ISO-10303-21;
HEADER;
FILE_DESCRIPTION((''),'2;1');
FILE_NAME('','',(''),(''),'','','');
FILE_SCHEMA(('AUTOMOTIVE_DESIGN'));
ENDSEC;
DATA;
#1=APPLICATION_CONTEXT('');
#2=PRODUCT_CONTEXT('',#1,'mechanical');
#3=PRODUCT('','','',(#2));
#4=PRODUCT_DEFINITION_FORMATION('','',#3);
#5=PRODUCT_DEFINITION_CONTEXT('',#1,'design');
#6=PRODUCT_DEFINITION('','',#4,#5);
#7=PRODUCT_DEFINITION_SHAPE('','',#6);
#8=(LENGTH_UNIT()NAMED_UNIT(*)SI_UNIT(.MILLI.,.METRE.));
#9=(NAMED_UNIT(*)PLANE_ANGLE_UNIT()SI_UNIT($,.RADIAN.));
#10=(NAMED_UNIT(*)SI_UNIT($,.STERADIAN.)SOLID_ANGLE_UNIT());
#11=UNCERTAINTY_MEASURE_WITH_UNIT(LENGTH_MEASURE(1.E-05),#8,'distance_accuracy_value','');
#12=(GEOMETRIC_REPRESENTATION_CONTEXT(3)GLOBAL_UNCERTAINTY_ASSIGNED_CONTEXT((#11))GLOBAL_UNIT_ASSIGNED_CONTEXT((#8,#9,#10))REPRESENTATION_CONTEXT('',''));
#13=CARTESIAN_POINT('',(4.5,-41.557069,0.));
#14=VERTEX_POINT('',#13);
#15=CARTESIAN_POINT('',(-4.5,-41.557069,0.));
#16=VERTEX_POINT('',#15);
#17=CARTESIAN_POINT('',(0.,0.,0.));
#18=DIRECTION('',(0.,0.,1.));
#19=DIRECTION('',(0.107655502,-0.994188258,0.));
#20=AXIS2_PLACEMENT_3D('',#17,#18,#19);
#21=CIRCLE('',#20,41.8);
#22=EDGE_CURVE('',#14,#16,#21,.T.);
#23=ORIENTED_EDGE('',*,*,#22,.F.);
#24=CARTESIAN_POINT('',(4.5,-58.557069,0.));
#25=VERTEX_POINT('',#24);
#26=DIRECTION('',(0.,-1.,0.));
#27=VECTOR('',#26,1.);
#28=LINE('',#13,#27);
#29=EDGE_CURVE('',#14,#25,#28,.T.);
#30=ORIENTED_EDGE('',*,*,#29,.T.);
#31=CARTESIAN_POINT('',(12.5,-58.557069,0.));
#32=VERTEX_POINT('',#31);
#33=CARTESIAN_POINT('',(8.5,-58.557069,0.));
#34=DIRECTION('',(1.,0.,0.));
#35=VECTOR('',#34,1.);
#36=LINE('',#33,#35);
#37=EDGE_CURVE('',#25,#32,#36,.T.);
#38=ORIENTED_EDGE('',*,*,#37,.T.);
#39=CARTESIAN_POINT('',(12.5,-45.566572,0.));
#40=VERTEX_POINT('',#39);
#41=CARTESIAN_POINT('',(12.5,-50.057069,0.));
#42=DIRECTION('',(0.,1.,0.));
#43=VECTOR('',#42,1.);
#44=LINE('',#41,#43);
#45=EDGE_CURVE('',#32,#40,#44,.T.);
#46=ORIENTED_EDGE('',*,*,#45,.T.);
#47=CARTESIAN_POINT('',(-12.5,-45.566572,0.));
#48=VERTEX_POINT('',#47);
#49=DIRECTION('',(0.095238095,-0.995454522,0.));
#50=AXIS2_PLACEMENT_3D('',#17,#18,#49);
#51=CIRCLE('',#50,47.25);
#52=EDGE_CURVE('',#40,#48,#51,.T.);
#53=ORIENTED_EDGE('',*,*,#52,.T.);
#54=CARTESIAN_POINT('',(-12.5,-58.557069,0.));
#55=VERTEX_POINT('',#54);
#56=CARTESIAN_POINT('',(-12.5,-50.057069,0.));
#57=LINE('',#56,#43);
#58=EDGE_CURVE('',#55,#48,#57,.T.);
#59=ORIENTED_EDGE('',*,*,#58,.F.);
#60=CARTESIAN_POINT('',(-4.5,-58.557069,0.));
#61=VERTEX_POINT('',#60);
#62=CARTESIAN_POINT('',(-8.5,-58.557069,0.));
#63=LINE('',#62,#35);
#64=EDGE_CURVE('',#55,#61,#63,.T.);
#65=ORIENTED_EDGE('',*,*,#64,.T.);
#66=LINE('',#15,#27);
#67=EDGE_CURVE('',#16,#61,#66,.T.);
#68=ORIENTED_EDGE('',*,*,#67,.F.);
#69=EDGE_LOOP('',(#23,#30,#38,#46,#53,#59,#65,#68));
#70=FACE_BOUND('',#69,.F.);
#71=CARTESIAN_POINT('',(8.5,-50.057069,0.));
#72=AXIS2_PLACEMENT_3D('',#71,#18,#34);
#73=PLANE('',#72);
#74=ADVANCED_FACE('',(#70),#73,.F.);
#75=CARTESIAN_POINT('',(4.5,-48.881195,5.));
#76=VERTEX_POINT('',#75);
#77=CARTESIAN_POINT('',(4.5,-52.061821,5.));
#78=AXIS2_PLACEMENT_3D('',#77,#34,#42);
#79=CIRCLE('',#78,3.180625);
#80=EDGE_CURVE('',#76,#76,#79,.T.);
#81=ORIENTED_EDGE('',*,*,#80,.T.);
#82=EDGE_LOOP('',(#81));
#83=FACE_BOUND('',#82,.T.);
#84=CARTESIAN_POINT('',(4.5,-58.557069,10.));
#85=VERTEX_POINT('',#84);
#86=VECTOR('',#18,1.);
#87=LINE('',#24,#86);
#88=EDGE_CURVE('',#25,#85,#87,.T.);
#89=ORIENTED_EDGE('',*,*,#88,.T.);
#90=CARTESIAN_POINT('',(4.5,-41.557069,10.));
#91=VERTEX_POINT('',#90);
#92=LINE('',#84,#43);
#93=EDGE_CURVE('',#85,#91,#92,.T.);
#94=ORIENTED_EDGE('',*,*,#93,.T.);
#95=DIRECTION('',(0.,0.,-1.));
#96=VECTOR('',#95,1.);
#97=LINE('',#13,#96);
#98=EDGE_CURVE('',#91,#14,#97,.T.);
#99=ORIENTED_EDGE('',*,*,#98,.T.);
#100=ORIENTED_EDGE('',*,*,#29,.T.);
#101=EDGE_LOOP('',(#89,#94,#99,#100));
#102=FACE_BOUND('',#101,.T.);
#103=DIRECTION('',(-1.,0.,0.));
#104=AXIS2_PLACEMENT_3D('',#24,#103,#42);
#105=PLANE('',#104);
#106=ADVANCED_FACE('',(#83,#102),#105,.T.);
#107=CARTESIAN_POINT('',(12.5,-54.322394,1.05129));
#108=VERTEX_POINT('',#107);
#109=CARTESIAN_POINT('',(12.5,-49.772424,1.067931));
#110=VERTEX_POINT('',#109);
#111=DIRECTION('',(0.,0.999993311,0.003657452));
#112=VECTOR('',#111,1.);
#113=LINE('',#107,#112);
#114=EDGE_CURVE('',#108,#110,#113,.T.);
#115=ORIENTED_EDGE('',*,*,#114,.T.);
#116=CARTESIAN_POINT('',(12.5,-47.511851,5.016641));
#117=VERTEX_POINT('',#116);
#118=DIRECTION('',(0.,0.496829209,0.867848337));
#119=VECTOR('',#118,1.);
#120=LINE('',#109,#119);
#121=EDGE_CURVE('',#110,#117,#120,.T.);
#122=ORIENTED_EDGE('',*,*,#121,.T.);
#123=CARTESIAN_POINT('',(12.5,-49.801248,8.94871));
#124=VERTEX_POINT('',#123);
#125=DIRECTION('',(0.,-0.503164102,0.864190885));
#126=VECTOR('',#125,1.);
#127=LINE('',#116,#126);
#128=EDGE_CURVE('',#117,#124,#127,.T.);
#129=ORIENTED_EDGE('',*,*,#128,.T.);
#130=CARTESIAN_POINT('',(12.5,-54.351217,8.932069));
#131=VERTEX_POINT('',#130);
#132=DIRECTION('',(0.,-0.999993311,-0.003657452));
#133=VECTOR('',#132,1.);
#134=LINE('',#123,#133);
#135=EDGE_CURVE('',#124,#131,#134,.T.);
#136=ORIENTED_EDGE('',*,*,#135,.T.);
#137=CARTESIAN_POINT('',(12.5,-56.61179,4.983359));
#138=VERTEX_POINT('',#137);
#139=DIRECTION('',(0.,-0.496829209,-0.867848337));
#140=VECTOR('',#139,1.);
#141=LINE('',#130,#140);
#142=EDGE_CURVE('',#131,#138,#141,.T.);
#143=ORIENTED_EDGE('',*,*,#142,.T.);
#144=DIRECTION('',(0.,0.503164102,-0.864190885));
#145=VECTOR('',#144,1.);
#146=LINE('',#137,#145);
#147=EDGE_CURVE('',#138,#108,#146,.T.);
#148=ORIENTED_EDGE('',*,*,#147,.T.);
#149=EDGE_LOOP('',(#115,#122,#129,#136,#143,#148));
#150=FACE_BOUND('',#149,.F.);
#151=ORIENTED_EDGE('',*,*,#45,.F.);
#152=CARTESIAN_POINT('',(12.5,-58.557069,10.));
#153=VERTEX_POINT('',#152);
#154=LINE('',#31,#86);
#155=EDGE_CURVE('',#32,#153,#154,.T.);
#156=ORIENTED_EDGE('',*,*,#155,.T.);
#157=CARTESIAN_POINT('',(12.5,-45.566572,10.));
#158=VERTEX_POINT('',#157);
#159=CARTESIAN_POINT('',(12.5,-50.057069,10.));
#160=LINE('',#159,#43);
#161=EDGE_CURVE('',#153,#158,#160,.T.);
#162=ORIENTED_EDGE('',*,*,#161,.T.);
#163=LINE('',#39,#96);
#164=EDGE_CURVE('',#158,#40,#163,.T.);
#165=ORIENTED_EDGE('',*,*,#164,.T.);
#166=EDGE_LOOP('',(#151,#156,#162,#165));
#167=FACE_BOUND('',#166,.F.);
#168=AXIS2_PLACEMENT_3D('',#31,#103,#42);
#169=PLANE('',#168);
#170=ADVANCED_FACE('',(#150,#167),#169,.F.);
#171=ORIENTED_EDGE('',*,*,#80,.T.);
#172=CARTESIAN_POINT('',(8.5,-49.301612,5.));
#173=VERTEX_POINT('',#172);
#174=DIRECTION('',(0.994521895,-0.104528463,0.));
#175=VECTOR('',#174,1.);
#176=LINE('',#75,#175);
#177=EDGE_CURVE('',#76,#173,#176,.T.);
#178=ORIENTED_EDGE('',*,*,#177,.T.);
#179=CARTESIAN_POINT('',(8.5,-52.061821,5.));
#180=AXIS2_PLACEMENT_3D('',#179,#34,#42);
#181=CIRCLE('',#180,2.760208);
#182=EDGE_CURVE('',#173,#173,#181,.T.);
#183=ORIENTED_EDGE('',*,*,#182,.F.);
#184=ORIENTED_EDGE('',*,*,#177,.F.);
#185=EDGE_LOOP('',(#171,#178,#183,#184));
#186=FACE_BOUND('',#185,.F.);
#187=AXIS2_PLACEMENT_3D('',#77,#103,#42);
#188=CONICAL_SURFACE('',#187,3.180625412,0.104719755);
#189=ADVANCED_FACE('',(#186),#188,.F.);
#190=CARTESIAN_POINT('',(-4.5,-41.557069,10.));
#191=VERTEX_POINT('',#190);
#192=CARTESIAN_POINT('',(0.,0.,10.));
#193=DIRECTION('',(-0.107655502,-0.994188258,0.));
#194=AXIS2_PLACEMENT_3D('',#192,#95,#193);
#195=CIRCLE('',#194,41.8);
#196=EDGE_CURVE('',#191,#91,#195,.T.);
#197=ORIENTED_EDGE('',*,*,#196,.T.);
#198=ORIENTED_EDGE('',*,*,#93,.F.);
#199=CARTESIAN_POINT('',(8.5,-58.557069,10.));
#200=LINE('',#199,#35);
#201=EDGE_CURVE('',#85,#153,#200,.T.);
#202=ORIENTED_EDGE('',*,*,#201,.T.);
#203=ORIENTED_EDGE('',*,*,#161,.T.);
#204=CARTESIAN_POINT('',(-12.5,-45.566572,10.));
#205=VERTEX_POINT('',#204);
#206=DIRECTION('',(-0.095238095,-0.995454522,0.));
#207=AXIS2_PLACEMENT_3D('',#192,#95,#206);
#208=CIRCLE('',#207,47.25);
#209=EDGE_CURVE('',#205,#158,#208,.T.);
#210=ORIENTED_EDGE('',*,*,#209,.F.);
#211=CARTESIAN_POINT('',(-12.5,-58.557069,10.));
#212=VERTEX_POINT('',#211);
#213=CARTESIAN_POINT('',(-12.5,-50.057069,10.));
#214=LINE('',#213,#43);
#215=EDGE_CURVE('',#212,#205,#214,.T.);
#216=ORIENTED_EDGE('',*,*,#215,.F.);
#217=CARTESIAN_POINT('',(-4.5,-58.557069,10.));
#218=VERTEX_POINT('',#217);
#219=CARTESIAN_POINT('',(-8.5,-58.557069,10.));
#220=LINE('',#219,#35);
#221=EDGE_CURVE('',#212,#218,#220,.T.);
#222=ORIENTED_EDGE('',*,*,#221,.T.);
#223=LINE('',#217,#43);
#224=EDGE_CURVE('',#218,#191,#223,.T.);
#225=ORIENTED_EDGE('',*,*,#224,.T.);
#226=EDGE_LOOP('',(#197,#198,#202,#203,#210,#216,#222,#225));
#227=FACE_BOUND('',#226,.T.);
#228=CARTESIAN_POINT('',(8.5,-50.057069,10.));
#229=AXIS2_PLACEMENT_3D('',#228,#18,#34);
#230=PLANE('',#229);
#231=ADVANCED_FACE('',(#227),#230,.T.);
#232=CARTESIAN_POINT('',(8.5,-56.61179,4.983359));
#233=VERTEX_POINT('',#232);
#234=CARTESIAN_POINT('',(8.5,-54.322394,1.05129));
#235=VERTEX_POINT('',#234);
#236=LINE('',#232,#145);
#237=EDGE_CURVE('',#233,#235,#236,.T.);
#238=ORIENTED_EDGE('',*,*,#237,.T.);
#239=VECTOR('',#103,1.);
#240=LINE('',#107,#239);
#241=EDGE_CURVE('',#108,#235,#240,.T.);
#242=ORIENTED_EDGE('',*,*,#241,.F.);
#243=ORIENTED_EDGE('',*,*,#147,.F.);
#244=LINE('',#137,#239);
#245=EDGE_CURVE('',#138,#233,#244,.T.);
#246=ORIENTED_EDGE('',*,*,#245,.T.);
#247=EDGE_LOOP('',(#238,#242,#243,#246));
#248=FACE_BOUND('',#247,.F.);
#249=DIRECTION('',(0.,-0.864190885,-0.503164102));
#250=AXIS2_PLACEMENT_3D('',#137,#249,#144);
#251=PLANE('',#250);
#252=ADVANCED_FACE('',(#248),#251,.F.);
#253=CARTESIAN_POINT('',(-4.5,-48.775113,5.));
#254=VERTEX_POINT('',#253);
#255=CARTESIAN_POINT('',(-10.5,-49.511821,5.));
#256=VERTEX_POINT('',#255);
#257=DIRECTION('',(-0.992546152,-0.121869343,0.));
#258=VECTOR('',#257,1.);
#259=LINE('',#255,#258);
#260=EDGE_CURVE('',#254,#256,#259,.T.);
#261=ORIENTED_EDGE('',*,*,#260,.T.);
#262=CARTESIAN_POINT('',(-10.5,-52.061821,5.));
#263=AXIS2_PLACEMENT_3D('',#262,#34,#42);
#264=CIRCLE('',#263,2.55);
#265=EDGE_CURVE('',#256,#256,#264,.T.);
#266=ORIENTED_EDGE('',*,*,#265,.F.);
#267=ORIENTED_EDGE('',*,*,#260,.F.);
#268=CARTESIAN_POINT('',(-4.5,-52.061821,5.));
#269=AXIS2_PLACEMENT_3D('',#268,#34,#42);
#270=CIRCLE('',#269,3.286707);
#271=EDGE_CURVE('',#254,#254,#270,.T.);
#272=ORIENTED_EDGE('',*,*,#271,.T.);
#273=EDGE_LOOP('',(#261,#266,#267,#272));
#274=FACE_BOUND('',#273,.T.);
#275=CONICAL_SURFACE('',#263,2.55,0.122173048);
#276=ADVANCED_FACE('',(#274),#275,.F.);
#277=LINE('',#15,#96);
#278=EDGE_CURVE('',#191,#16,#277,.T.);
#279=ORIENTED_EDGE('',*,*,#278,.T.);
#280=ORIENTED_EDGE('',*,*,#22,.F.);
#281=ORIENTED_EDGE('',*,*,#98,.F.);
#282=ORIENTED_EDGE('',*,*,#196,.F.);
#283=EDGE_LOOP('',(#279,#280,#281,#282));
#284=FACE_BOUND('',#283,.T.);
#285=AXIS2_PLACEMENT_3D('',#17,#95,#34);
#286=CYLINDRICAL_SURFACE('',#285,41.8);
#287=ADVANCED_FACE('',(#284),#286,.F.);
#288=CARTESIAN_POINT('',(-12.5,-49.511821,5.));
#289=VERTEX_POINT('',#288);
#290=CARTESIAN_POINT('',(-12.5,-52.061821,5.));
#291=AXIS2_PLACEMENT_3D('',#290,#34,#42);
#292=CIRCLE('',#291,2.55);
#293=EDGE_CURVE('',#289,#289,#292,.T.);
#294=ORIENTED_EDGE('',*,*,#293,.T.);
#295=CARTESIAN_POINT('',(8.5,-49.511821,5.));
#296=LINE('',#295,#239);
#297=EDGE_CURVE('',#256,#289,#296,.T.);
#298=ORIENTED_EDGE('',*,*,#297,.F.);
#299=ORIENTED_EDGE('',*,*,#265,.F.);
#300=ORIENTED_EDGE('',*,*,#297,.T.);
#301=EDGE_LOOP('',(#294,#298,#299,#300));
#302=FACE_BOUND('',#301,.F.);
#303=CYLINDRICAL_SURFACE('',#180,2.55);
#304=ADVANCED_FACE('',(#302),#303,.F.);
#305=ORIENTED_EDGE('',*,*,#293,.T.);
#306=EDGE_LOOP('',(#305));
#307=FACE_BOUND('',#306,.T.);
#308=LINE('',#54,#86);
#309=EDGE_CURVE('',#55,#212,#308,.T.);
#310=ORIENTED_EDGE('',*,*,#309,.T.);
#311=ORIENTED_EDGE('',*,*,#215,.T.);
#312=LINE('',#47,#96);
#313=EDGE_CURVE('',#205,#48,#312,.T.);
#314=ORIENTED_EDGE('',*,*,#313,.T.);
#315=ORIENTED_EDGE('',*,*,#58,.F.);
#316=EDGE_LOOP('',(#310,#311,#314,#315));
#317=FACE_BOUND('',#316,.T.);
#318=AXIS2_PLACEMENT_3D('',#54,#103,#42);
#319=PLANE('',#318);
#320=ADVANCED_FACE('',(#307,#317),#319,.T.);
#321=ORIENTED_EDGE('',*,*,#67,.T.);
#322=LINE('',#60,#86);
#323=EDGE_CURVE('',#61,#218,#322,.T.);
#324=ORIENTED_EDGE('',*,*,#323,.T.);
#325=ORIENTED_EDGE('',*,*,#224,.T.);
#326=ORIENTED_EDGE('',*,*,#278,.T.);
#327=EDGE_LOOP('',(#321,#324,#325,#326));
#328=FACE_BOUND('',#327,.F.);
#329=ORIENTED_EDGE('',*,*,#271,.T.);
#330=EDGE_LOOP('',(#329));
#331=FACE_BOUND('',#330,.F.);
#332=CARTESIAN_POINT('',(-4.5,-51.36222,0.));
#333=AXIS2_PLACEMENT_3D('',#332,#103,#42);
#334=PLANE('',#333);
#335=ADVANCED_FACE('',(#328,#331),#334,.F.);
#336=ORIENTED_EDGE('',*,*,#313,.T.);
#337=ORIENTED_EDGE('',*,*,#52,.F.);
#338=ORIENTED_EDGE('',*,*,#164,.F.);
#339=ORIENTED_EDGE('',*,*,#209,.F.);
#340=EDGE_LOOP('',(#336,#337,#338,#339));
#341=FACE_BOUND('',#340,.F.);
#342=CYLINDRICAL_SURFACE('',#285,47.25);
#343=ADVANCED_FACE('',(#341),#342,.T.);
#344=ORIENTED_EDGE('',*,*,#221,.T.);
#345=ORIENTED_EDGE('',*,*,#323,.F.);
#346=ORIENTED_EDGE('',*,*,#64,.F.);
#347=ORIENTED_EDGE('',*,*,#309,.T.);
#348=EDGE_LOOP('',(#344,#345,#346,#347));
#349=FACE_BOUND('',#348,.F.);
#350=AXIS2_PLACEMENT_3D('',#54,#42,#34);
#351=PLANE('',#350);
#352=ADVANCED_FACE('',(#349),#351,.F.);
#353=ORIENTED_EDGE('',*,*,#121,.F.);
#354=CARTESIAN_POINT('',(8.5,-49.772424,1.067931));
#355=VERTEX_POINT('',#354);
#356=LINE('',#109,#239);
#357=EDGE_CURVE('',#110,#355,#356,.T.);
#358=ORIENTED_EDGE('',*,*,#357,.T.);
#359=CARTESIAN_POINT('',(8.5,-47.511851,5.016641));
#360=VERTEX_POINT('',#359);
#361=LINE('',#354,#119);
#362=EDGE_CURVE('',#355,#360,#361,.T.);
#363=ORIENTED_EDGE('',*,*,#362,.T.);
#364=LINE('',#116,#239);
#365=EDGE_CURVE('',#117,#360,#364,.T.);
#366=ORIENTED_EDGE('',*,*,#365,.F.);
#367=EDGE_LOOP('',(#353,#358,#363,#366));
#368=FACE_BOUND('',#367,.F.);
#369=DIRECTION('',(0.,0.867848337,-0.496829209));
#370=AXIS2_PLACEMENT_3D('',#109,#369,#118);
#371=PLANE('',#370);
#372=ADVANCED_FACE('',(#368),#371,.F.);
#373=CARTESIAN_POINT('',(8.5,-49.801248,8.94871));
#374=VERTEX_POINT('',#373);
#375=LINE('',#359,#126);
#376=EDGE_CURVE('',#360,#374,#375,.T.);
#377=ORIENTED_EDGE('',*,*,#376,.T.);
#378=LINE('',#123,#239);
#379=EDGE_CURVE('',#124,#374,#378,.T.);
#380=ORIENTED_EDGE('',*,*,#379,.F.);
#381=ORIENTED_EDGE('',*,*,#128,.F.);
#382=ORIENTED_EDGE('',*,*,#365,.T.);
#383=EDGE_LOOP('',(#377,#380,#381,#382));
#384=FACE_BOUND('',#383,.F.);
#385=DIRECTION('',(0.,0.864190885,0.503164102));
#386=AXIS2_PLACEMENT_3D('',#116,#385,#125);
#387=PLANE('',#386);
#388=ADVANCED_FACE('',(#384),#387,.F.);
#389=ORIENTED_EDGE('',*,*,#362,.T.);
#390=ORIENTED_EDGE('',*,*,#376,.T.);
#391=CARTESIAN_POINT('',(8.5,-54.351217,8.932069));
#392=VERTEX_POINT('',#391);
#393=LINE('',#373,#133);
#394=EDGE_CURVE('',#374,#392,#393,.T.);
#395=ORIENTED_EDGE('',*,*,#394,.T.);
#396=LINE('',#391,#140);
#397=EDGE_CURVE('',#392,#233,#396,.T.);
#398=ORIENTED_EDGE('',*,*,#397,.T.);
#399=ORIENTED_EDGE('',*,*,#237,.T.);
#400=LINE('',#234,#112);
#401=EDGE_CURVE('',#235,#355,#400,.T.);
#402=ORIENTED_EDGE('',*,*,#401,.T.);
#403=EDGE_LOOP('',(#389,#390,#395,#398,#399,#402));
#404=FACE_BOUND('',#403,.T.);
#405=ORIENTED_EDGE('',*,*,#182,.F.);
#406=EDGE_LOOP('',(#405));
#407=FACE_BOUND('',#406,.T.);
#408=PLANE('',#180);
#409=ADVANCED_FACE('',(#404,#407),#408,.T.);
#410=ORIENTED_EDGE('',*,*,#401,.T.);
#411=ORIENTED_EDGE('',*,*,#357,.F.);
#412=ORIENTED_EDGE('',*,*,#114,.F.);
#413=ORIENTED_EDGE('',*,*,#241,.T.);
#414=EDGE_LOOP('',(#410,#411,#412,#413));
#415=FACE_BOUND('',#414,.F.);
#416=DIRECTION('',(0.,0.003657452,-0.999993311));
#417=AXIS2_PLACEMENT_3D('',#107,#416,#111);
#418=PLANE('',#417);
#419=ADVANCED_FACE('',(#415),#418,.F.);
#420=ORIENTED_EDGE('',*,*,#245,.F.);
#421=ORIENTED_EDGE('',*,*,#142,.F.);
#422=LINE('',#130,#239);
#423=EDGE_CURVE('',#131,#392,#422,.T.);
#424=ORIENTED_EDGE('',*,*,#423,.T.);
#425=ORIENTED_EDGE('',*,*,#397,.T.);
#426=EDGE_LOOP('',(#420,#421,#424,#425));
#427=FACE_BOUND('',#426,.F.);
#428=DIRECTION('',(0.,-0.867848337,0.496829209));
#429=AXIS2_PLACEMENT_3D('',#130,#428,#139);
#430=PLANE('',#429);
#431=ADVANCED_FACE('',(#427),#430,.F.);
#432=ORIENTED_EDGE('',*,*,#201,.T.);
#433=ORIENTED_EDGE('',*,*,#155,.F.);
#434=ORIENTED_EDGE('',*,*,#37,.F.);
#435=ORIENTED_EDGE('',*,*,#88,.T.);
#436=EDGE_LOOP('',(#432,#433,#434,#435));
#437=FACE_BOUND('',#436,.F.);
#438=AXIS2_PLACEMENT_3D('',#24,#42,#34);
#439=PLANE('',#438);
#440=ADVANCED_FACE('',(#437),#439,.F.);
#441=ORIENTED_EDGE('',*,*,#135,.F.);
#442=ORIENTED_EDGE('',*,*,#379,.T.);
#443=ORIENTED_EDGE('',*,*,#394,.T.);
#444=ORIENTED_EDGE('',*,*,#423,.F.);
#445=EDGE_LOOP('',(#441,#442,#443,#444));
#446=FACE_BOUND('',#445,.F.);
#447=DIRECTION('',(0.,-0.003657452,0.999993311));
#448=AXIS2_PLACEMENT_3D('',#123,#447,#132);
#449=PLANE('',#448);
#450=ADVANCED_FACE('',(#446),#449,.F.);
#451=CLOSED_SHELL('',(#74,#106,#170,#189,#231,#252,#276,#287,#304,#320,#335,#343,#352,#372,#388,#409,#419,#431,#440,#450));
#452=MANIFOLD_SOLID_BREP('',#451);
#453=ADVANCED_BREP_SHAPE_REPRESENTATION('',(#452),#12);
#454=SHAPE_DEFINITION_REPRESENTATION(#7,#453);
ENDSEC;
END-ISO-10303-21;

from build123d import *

# Parameters (mm, degrees)
F0_R      = 47.25
F0_R_2    = 41.8
F1_DEPTH  = 10
F2_W      = 4.5
F2_H      = 12.6647017896
F3_DEPTH  = 25
F4_W      = 8
F4_H      = 17
F5_DEPTH  = 10
F7_DEPTH  = 4
F8_R      = 2.55
F9_DEPTH  = 25
F10_SIZE2 = 6
F10_SIZE  = 0.7367073654


# Not quite as in the source:
# - a fillet or chamfer that OpenCascade refuses, or shapes differently, is made with other operations: its cross-section is extruded or revolved along the edge and cut away or added


with BuildPart() as f1:
    # F0 (on Top) → F1 (new body)
    with BuildSketch(Plane.XY):
        Circle(F0_R)
        Circle(F0_R_2, mode=Mode.SUBTRACT)
    extrude(amount=F1_DEPTH)

    # F2 (on Top) → F3 (cut)
    with BuildSketch(Plane.XY):
        with Locations((-2.25, -45.0298693031)):
            Rectangle(F2_W, F2_H)
        with Locations((2.25, -45.0298693031)):
            Rectangle(F2_W, F2_H)
    extrude(amount=F3_DEPTH, mode=Mode.SUBTRACT)

    # F4 (on Top) → F5 (join)
    with BuildSketch(Plane.XY):
        with Locations((8.5, -50.0570691941)):
            Rectangle(F4_W, F4_H)
        with Locations((-8.5, -50.0570691941)):
            Rectangle(F4_W, F4_H)
    extrude(amount=F5_DEPTH)

    # F6 (on face) → F7 (cut)
    with BuildSketch(Plane.YZ.offset(12.5)):
        Polygon((-49.7724240202, 1.0679314721), (-47.5118511184, 5.0166414077), (-49.8012477839, 8.9487099356), (-54.3512173512, 8.9320685279), (-56.6117902531, 4.9833585923), (-54.3223935876, 1.0512900644), align=None)
    extrude(amount=-F7_DEPTH, mode=Mode.SUBTRACT)

    # F8 (on face) → F9 (cut)
    with BuildSketch(Plane.YZ.offset(8.5)):
        with Locations((-52.0618206857, 5)):
            Circle(F8_R)
    extrude(amount=-F9_DEPTH, mode=Mode.SUBTRACT)

    # F10
    f10_edges = [f1.edges().sort_by_distance(p)[0] for p in [
        (-4.5, -54.611821, 5),
    ]]
    f10_side = f1.faces().sort_by_distance((-4.5, -50.057069, 0.197231))[0]
    chamfer(f10_edges, length=F10_SIZE, length2=F10_SIZE2, reference=f10_side)

    # F11: chamfer of 6 x 0.6306254116 on 1 edges, made by hand

    # F11_s1 → F11_t2 (revolve, cut)
    with BuildSketch(Plane.XY.offset(5)):
        Polygon((4.5, -48.8811952741), (10.5, -49.5118206857), (4.5, -49.5118206857), align=None)
    revolve(axis=Axis((4.5, -52.0618206857, 5), (1, 0, 0)), mode=Mode.SUBTRACT)


solid = f1.part
